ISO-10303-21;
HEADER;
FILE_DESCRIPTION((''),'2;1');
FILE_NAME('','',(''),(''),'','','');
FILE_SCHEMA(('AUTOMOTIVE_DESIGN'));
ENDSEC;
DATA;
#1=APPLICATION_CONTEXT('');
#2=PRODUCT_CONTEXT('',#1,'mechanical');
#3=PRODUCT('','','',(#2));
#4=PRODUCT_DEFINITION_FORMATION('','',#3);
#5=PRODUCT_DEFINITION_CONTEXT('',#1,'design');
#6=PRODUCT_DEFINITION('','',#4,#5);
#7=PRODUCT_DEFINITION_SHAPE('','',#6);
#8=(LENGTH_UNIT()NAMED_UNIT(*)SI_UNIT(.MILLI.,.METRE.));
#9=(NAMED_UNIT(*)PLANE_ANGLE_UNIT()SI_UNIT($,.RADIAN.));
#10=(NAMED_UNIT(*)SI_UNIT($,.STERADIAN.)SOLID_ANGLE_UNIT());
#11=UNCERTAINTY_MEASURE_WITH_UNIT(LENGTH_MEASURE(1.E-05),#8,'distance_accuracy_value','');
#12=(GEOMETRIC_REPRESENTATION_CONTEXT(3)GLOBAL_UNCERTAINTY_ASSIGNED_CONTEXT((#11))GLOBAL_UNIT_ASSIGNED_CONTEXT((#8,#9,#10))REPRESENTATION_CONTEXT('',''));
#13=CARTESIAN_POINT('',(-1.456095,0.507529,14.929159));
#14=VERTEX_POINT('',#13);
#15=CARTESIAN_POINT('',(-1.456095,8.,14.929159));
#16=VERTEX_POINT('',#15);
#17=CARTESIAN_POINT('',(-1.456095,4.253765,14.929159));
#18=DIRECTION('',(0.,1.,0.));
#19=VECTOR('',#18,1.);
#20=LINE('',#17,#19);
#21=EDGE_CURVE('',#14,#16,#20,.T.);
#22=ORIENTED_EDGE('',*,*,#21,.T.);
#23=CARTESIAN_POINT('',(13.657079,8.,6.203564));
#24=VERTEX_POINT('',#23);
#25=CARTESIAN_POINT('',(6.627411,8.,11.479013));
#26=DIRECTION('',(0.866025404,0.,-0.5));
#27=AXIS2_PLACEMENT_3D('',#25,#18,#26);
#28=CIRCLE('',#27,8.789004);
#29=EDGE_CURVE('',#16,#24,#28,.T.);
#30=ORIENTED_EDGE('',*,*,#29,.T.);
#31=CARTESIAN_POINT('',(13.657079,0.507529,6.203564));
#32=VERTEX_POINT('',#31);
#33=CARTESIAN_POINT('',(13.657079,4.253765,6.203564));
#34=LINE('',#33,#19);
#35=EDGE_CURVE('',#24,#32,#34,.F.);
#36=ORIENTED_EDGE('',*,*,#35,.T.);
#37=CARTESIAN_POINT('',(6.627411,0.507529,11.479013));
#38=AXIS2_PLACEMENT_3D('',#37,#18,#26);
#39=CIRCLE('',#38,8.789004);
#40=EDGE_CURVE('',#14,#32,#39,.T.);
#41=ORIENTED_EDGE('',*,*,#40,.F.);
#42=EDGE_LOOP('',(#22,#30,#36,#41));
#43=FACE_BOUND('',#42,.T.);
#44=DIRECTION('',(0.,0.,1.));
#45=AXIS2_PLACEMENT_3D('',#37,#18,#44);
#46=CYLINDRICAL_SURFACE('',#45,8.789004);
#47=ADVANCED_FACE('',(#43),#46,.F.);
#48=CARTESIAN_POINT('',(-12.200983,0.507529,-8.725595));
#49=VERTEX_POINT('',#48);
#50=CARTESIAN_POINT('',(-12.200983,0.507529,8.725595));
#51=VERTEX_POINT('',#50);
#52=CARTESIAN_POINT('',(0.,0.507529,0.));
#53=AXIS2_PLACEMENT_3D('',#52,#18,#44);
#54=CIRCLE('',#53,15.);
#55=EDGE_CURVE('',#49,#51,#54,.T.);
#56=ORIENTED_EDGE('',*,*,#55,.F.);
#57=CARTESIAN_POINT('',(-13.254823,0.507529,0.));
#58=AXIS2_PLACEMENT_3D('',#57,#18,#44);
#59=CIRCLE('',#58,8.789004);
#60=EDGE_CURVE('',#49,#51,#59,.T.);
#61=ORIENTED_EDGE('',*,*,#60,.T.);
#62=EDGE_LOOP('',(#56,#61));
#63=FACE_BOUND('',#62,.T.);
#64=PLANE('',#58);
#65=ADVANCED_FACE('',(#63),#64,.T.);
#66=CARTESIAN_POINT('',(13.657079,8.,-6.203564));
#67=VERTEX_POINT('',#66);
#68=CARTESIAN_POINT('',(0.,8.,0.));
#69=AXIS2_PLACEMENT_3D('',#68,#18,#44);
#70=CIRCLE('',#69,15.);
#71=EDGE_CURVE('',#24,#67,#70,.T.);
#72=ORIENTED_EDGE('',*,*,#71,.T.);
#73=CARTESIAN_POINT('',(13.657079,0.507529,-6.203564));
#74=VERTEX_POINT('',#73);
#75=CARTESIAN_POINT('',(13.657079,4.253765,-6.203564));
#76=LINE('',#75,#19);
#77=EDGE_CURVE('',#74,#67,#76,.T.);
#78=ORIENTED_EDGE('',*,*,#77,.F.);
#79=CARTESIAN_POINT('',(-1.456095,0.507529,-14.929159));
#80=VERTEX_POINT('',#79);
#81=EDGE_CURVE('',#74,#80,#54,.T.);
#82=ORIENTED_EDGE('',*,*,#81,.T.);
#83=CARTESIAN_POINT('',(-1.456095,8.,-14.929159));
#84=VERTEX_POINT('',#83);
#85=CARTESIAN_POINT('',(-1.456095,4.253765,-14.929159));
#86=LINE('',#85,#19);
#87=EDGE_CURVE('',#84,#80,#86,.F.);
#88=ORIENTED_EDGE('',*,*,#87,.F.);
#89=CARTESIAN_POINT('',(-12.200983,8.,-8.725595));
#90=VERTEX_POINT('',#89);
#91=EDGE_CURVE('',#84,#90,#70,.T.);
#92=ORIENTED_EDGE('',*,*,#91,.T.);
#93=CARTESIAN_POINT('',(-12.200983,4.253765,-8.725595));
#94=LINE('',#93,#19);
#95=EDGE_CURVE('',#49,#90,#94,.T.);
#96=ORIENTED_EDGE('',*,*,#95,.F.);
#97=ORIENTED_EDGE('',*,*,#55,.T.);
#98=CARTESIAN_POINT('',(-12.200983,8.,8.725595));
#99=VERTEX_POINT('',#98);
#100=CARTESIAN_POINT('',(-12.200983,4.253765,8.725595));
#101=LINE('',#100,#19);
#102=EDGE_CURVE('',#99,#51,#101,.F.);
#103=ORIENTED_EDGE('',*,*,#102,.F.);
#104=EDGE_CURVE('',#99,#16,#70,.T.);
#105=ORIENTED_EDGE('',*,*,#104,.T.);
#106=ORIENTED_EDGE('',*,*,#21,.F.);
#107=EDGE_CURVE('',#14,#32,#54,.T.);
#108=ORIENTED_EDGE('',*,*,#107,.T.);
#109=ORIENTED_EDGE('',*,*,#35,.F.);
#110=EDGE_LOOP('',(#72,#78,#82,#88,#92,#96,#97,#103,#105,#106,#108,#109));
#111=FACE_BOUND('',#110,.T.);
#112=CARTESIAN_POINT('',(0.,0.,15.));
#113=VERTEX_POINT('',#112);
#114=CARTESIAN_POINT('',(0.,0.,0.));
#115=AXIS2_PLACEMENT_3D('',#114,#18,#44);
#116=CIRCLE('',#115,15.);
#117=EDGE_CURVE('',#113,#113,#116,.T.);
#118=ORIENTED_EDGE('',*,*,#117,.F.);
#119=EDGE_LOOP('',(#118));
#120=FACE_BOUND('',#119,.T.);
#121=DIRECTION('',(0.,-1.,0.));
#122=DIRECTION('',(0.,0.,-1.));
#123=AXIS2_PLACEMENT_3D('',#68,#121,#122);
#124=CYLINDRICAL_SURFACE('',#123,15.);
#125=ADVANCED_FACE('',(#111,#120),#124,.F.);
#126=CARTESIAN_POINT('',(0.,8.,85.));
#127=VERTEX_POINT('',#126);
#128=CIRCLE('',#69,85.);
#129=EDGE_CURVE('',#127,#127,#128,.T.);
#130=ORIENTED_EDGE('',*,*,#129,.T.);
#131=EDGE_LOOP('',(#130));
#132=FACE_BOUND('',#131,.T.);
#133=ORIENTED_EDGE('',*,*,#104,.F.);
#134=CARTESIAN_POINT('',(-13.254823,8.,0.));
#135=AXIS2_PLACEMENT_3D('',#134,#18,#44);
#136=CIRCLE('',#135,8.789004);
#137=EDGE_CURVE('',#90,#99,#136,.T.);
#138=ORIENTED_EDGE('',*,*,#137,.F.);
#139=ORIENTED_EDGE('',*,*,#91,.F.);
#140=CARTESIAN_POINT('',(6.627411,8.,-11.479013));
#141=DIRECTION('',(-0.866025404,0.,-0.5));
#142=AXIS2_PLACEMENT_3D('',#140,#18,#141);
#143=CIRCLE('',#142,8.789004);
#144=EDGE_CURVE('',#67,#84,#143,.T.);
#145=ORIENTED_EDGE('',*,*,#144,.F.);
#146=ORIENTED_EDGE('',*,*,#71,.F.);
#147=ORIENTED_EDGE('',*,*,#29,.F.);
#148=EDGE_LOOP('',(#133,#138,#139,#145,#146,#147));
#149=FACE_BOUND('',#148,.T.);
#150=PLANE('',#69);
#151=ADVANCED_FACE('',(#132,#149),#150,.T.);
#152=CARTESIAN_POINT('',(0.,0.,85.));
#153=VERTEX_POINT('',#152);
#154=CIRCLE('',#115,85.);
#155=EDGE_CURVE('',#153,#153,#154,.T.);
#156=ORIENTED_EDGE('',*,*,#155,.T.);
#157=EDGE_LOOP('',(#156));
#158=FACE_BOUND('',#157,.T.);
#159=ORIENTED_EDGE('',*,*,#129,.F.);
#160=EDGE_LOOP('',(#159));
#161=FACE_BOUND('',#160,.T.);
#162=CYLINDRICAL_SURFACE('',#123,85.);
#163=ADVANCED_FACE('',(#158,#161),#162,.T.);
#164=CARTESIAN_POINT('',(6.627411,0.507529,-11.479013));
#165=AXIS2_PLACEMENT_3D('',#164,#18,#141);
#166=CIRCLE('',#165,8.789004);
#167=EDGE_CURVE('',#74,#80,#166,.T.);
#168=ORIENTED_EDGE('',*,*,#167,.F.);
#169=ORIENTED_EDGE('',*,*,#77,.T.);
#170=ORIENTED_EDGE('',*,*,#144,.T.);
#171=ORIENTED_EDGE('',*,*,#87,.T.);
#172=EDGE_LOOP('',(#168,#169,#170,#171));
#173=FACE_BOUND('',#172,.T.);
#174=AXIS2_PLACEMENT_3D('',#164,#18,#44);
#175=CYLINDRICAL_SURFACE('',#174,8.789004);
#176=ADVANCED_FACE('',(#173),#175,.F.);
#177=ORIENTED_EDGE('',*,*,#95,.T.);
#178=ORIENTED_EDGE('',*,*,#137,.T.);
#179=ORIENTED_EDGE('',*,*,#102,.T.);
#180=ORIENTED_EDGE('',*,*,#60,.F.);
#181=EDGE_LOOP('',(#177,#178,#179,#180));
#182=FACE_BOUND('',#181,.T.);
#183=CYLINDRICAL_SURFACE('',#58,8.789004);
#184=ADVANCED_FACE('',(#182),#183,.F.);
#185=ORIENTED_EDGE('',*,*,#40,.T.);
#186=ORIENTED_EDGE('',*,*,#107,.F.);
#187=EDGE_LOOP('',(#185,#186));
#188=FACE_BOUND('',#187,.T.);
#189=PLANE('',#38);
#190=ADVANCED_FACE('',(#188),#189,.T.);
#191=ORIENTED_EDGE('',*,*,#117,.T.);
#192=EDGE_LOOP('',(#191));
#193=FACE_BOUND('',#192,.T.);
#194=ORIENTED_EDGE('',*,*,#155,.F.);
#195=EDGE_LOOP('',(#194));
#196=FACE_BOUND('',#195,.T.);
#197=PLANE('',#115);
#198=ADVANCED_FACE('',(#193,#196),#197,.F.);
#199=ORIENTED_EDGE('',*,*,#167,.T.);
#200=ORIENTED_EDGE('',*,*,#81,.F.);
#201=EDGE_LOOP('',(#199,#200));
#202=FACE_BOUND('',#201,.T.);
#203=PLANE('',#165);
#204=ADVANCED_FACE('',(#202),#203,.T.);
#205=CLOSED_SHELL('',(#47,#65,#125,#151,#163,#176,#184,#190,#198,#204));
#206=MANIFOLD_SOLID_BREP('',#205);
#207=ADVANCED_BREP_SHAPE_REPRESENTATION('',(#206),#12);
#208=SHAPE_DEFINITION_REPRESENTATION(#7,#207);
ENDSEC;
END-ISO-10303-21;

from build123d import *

# Parameters (mm, degrees)
SKETCH1_R           = 85
BOSS_EXTRUDE1_DEPTH = 8
SKETCH2_R           = 15
CUT_EXTRUDE1_DEPTH  = 121.474063599
SKETCH3_R           = 8.789003689
CUT_EXTRUDE2_DEPTH  = 7.49247051
CIRPATTERN1_COUNT   = 3


with BuildPart() as part:
    # Sketch1 → Boss-Extrude1 (new body)
    with BuildSketch(Plane(origin=(0, 0, 0), x_dir=(1, 0, 0), z_dir=(0, 1, 0))):
        Circle(SKETCH1_R)
    extrude(amount=BOSS_EXTRUDE1_DEPTH)

    # Sketch2 → Cut-Extrude1 (cut, through all)
    with BuildSketch(Plane(origin=(0, 0, 0), x_dir=(1, 0, 0), z_dir=(0, 1, 0))):
        Circle(SKETCH2_R)
    extrude(amount=CUT_EXTRUDE1_DEPTH, mode=Mode.SUBTRACT)

    # Sketch3 → Cut-Extrude2 (cut)
    with BuildSketch(Plane(origin=(0, 8, 0), x_dir=(1, 0, 0), z_dir=(0, 1, 0))):
        with Locations((-13.254822843, 0)):
            Circle(SKETCH3_R)
    cut_extrude2 = extrude(amount=-CUT_EXTRUDE2_DEPTH, mode=Mode.SUBTRACT)

    # CirPattern1: Cut-Extrude2 ×3 about axis
    cirpattern1_axis = Axis((0, 0, 0), (0, 1, 0))
    for i in range(1, CIRPATTERN1_COUNT):
        add(cut_extrude2.rotate(cirpattern1_axis, i * 360 / CIRPATTERN1_COUNT), mode=Mode.SUBTRACT)


solid = part.part
